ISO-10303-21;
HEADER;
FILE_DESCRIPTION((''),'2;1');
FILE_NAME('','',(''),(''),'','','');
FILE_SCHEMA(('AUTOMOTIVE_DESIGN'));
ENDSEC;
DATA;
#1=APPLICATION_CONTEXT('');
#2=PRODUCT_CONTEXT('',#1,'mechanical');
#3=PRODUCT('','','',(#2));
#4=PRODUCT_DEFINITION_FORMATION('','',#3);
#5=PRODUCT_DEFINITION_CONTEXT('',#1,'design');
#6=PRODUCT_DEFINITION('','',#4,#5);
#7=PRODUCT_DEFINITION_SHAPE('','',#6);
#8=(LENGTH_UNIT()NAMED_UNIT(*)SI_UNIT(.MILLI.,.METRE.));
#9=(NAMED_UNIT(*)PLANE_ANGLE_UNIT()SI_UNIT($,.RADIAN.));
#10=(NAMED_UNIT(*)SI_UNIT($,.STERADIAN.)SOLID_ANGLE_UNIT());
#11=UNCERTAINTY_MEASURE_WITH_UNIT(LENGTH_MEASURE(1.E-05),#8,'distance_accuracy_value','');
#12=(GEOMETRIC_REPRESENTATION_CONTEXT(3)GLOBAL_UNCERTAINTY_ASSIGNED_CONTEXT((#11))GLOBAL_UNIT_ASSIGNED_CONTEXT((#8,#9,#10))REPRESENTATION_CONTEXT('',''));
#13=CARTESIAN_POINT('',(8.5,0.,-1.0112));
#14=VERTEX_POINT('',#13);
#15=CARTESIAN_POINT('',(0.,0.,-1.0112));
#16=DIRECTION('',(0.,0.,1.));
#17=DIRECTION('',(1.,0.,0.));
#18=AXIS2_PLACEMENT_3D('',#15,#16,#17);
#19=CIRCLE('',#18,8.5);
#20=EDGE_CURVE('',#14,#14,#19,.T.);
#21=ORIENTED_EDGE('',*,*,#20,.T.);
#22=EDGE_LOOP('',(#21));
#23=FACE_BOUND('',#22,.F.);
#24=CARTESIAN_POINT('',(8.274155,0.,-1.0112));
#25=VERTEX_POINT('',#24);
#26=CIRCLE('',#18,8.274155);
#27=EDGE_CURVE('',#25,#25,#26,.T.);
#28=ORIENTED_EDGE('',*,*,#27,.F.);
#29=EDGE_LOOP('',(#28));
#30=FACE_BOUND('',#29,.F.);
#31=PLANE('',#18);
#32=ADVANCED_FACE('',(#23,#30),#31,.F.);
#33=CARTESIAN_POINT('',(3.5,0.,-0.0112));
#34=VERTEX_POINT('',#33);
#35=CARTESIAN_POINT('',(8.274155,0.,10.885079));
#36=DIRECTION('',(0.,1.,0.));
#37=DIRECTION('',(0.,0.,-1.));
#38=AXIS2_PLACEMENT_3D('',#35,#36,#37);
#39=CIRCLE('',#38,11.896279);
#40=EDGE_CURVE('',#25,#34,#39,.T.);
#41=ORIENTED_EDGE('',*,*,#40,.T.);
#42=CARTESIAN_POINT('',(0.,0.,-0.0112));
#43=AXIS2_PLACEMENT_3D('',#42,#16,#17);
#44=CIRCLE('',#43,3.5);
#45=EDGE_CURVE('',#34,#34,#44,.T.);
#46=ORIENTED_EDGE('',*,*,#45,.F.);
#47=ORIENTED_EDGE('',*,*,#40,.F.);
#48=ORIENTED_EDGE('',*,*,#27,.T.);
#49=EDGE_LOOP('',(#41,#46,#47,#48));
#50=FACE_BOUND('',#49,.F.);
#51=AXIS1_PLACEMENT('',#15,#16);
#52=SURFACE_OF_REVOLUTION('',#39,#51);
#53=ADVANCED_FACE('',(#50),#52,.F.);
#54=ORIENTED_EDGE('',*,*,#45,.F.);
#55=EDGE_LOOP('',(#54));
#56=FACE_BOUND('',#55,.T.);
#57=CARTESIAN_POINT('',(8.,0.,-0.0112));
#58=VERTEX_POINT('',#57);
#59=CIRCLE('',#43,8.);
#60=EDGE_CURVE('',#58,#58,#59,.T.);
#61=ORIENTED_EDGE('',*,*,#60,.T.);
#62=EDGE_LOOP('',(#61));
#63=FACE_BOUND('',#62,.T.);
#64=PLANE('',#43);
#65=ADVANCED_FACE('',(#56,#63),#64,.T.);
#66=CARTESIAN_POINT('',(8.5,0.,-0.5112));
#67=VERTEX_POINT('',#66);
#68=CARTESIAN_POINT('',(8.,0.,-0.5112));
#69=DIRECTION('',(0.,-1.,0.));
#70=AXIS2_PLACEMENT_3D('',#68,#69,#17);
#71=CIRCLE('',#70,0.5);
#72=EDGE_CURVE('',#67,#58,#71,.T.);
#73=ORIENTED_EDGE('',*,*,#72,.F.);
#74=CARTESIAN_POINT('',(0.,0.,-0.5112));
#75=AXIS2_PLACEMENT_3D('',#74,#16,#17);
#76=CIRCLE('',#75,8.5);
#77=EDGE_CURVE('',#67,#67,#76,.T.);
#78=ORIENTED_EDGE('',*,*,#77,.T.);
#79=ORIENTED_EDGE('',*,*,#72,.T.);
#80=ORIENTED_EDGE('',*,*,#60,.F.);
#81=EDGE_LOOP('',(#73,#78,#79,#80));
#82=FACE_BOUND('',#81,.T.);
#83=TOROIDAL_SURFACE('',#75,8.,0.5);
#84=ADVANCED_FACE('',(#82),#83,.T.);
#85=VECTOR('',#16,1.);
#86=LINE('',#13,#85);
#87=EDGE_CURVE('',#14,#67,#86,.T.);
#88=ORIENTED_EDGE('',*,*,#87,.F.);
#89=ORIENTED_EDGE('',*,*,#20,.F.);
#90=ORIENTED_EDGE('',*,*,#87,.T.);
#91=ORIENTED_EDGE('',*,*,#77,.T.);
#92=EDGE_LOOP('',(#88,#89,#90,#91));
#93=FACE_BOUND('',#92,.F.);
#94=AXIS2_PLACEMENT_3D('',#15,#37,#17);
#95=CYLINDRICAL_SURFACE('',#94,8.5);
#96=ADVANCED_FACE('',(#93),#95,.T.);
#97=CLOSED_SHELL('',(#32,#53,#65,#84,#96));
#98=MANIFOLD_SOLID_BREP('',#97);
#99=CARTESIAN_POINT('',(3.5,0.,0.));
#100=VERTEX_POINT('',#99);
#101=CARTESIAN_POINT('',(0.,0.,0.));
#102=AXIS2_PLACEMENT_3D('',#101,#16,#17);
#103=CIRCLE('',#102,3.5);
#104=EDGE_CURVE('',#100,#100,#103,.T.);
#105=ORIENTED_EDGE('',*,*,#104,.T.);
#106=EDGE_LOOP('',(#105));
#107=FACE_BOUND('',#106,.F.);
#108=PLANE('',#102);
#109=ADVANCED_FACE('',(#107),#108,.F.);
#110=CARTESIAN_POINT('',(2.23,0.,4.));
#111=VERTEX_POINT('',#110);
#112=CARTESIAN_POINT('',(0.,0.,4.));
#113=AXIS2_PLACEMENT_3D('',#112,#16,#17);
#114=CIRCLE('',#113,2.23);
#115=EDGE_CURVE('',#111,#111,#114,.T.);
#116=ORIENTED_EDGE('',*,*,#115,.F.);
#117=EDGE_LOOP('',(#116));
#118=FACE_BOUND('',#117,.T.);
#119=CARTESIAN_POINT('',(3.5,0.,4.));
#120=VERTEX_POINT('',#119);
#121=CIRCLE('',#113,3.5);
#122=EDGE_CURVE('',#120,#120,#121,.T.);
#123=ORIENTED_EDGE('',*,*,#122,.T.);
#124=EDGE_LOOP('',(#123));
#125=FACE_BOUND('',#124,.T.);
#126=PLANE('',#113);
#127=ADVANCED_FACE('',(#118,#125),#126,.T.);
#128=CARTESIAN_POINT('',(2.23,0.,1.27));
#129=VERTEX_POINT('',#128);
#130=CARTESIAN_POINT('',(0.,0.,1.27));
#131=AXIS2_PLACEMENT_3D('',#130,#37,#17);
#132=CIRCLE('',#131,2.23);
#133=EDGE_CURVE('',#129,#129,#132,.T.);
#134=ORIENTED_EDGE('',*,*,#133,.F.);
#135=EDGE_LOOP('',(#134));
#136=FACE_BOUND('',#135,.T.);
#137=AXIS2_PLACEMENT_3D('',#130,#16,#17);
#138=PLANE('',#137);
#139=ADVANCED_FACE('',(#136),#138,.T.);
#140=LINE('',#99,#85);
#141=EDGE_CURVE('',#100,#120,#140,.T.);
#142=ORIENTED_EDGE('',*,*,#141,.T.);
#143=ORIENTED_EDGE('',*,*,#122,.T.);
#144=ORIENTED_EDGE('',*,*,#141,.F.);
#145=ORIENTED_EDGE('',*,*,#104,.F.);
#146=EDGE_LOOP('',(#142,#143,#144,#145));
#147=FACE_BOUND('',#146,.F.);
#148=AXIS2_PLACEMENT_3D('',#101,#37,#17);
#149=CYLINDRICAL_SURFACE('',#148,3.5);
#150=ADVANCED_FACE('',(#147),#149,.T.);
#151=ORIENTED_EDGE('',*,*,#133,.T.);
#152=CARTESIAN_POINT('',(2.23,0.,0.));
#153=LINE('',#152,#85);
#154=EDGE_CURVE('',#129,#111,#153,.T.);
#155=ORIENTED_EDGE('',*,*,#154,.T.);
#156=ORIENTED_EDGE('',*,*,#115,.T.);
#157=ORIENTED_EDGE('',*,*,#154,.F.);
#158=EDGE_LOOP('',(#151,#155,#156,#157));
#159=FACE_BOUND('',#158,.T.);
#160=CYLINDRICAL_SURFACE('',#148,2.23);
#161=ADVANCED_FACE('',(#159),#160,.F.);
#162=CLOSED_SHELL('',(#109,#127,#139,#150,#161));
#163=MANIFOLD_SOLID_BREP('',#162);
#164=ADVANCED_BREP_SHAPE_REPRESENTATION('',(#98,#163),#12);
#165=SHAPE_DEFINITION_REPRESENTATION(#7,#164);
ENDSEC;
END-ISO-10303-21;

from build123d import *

# Parameters (mm, degrees)
F0_R     = 3.5
F1_DEPTH = 4
F0_R_2   = 8.5
F2_DEPTH = 1
F3_R     = 0.5
F4_T     = -1.27


# Not quite as in the source:
# - a fillet or chamfer that OpenCascade refuses, or shapes differently, is made with other operations: its cross-section is extruded or revolved along the edge and cut away or added


with BuildPart() as f1:
    # F0 (on Top) → F1 (new body)
    with BuildSketch(Plane.XY):
        Circle(F0_R)
    extrude(amount=F1_DEPTH)

    # F4
    f4_openings = [f1.faces().sort_by_distance(p)[0] for p in [
        (0, 0, 4),
    ]]
    offset(amount=F4_T, openings=f4_openings)


with BuildPart() as f2:
    # F0 (on Top) → F2 (new body)
    with BuildSketch(Plane.XY):
        Circle(F0_R_2)
        Circle(F0_R, mode=Mode.SUBTRACT)
    extrude(amount=F2_DEPTH)

    # F3
    f3_edges = [f2.edges().sort_by_distance(p)[0] for p in [
        (-8.5, 0, 1),
    ]]
    fillet(f3_edges, radius=F3_R)


with BuildPart() as f2_1:
    # F5: moved
    add(f2.part.moved(Location((0, 0, -1.0112))))

    # F6: fillet of radius 11.8962787499 on 1 edges, made by hand

    # F6_s1 → F6_t2 (revolve, cut)
    with BuildSketch(Plane.XZ):
        with BuildLine():
            ThreePointArc((8.2741551609, -1.0112), (5.8352743981, -0.7585164303), (3.5, -0.0112))
            Line((3.5, -0.0112), (3.4045168968, -0.229125575))
            ThreePointArc((3.4045168968, -0.229125575), (3.262074425, -0.5112), (3.262074425, -1.0112))
            Line((3.262074425, -1.0112), (3.5, -1.249125575))
            Line((3.5, -1.249125575), (8.2741551609, -1.249125575))
            Line((8.2741551609, -1.249125575), (8.2741551609, -1.0112))
        make_face()
    revolve(axis=Axis((0, 0, -1.0112), (0, 0, 1)), mode=Mode.SUBTRACT)


solid = Compound([f1.part, f2_1.part])
